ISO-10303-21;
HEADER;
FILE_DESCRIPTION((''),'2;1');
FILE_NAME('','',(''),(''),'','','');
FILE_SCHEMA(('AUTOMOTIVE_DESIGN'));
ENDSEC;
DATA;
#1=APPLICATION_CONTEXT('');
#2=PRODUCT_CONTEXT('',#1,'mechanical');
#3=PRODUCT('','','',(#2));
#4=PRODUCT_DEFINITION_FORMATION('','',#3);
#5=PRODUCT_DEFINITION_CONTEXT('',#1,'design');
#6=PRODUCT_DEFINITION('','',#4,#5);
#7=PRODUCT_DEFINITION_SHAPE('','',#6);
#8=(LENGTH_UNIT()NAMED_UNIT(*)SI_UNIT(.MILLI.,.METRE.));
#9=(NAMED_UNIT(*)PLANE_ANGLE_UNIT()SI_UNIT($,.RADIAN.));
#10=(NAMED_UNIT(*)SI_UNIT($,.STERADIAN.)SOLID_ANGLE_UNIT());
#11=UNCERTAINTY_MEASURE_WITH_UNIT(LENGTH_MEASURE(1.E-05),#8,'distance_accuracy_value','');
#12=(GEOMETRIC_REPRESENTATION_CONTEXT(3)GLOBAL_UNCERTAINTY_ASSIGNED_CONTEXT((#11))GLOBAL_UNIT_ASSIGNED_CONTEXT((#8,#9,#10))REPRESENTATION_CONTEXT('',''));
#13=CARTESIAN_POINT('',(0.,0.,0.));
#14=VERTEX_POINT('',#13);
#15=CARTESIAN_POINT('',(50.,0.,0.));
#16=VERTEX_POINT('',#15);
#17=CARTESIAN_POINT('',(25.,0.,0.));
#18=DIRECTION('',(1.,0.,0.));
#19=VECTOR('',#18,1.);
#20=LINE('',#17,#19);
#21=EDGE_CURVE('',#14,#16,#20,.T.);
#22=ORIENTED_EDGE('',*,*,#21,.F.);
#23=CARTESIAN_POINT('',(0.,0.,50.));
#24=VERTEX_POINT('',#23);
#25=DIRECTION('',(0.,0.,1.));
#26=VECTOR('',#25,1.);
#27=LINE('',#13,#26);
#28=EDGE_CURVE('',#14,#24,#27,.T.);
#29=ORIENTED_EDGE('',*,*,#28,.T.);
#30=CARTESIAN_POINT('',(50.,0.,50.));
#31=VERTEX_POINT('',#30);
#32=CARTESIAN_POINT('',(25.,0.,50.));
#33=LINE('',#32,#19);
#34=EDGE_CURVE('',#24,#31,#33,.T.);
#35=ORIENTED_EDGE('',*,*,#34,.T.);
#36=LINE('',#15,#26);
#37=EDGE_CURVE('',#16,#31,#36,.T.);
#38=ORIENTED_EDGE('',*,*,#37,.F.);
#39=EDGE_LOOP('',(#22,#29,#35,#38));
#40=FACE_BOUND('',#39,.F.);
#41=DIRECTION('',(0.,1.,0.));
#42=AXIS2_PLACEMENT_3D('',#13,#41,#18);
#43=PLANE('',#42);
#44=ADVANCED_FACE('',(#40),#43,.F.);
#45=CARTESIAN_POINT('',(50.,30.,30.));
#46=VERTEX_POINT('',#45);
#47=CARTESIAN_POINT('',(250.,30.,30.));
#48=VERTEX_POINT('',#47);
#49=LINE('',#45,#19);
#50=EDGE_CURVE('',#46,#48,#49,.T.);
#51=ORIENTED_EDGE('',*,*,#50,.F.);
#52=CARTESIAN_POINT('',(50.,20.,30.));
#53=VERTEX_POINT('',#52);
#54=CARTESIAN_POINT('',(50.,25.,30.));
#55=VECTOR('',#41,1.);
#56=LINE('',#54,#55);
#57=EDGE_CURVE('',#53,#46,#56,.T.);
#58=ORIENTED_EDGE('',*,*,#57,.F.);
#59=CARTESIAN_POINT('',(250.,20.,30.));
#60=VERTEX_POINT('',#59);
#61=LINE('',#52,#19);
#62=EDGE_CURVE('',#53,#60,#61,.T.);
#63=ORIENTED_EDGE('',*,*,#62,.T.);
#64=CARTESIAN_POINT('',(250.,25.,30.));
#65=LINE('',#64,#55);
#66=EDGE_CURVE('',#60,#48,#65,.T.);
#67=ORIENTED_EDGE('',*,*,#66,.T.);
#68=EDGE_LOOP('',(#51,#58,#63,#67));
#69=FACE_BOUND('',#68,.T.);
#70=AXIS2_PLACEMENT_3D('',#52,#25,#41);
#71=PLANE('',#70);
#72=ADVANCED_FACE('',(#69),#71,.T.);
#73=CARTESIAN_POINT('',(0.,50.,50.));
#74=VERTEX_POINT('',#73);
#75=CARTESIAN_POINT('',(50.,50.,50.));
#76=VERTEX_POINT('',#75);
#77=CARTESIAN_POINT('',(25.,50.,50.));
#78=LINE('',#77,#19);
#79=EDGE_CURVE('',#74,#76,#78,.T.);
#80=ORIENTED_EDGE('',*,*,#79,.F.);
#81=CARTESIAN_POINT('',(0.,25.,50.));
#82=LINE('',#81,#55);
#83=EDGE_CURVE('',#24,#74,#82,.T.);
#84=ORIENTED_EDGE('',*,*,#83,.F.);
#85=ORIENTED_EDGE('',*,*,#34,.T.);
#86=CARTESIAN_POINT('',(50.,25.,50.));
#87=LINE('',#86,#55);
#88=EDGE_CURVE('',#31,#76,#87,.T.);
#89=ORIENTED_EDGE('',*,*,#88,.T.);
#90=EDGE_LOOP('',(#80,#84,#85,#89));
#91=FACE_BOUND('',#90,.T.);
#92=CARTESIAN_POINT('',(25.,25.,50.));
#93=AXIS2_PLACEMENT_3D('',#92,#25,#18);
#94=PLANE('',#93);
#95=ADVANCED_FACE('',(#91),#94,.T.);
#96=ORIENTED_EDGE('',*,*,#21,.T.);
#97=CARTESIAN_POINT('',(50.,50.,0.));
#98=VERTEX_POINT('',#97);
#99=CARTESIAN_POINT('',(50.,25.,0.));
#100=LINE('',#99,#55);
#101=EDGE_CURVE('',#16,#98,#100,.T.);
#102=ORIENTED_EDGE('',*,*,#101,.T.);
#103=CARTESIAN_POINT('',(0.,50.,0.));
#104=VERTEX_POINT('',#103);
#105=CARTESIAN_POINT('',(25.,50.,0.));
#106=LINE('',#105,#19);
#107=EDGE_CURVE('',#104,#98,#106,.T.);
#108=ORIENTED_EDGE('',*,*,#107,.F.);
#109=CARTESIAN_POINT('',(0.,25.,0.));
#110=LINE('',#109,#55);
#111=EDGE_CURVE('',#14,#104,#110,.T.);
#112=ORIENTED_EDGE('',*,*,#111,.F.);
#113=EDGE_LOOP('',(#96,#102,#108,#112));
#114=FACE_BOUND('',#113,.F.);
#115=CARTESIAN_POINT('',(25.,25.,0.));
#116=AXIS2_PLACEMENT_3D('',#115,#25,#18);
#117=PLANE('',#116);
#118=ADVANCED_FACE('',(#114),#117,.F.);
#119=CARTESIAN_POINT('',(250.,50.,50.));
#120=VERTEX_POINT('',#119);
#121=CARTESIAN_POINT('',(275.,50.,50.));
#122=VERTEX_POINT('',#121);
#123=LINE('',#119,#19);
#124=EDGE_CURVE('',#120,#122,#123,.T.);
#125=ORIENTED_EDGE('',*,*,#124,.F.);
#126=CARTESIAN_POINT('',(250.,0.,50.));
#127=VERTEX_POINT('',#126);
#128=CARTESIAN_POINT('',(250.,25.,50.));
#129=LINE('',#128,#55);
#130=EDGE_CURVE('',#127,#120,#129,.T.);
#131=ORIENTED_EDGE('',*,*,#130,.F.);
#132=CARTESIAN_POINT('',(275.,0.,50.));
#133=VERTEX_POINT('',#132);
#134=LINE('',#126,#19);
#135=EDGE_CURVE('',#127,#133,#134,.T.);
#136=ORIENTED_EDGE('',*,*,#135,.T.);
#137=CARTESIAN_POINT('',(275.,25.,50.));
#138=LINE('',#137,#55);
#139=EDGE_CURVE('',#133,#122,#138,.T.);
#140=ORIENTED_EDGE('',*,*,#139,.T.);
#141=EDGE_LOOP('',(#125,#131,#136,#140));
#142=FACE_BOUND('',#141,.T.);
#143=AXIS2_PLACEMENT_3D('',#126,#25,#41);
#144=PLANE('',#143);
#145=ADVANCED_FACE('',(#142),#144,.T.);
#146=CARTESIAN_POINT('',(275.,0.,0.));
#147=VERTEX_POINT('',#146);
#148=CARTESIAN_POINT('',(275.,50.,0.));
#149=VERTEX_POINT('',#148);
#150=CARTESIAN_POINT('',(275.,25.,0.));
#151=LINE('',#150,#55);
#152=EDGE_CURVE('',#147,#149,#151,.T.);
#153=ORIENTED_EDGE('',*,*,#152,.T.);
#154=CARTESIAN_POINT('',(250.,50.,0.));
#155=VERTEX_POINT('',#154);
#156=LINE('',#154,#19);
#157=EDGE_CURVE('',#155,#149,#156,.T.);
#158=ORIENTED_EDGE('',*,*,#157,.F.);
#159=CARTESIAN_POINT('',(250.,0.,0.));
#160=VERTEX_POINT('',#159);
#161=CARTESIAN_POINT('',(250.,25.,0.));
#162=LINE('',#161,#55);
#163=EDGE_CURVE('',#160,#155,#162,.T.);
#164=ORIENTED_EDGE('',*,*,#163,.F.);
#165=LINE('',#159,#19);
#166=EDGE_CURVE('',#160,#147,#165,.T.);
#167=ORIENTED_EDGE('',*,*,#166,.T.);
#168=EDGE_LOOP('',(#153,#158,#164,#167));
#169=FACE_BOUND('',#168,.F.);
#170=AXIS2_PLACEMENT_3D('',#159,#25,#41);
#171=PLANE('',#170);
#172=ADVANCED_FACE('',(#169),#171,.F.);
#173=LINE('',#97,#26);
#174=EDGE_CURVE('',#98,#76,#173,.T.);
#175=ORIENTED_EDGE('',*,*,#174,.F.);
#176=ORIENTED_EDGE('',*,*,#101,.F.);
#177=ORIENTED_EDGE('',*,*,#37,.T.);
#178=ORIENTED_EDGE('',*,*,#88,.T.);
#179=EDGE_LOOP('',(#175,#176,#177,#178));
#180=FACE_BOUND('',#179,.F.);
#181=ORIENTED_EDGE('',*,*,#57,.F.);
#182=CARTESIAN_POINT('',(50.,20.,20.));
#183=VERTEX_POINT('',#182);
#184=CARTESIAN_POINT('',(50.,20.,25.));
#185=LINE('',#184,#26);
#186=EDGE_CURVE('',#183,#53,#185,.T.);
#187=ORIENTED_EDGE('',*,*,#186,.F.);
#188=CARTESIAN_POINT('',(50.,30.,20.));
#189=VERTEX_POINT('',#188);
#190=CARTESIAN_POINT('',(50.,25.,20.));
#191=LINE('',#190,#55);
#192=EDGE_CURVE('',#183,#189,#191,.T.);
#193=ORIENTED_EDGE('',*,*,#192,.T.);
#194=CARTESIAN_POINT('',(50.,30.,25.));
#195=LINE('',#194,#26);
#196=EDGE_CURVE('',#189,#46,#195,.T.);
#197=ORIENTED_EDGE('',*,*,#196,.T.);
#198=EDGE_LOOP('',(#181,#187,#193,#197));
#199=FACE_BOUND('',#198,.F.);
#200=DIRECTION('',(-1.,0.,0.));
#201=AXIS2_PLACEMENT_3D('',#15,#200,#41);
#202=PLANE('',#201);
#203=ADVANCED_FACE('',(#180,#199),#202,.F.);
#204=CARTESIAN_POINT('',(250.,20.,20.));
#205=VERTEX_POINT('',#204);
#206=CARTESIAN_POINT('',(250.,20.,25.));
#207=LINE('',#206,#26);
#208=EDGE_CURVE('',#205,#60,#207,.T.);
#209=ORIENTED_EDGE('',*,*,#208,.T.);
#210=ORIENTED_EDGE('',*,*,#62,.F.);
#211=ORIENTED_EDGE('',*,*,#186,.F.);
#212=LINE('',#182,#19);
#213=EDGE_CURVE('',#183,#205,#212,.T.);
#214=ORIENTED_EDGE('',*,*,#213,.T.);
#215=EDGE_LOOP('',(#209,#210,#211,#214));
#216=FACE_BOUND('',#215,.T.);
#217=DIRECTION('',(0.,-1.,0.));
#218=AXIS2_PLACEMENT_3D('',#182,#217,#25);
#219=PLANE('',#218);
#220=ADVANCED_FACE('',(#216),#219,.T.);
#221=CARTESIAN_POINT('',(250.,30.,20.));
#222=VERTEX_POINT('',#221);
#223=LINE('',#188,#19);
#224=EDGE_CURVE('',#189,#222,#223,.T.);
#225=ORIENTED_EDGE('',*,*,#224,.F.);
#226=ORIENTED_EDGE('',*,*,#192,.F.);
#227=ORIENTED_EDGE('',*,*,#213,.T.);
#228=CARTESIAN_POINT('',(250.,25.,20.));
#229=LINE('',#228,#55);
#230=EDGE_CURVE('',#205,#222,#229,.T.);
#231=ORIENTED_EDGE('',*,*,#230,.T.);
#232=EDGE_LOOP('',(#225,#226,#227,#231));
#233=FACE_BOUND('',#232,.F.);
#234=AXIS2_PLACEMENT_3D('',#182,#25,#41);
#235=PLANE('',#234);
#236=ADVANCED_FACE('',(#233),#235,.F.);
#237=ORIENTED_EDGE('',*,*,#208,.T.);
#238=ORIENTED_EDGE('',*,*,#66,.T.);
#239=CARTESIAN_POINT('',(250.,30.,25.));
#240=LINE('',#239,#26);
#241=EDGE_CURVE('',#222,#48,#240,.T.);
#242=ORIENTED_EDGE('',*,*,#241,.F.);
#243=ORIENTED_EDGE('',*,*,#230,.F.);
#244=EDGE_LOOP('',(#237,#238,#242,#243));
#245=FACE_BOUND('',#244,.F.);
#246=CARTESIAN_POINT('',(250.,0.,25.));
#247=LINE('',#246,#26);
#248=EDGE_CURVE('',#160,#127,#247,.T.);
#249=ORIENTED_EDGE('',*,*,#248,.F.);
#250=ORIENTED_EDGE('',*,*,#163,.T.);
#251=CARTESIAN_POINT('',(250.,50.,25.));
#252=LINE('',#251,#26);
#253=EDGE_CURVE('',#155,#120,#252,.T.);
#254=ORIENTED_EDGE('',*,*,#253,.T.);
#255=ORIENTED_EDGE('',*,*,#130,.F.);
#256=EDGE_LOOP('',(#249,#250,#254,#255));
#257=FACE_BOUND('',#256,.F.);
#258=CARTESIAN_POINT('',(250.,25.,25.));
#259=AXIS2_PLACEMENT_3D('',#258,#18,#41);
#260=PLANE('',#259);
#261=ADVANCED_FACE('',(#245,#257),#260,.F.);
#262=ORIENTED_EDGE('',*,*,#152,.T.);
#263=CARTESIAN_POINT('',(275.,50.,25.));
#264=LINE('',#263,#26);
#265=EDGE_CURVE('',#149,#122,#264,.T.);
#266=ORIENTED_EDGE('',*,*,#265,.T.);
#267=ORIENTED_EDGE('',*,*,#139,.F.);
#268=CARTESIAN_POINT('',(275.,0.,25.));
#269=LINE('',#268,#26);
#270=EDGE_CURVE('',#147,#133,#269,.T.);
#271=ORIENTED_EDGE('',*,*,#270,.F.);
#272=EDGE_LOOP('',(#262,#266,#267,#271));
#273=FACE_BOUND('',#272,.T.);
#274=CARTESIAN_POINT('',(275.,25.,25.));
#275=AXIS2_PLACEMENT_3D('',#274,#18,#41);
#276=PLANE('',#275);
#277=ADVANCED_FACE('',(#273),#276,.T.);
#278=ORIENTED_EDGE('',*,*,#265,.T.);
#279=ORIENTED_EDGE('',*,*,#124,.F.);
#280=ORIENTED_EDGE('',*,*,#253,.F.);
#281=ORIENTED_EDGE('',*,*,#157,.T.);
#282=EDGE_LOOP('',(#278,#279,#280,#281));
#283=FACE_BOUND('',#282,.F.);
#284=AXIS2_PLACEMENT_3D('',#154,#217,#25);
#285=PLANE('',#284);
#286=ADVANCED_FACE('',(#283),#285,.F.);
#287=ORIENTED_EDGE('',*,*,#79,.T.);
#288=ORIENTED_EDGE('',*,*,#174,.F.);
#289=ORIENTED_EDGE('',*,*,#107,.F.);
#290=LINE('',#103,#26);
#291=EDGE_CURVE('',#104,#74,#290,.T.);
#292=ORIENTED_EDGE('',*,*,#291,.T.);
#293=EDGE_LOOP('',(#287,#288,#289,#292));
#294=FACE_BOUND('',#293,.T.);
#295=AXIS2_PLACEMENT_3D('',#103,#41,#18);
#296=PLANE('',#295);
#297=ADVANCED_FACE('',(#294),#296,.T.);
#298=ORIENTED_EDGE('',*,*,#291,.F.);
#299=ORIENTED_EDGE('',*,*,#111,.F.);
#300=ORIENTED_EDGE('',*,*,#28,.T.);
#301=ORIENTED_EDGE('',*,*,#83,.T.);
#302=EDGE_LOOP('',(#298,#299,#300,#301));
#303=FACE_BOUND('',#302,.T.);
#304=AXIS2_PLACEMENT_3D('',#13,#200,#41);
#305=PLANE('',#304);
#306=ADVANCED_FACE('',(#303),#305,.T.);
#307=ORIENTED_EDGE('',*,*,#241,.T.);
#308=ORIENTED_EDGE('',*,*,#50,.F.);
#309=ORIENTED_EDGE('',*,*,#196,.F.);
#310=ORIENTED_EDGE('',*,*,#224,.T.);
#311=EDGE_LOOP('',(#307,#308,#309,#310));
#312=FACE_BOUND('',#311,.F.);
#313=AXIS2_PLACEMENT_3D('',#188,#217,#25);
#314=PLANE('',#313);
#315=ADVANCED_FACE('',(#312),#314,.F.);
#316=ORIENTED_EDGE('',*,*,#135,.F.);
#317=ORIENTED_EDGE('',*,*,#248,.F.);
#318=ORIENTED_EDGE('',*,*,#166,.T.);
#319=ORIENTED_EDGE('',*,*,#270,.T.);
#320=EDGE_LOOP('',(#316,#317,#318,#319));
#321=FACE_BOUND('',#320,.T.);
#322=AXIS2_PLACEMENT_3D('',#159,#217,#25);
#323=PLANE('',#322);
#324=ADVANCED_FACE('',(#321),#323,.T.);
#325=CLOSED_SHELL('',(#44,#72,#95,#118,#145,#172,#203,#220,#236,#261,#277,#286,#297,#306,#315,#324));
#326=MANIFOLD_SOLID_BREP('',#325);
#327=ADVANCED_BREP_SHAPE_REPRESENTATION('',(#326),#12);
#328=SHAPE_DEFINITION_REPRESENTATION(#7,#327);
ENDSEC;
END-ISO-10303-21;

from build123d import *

# Parameters (mm, degrees)
F0_W     = 50
F0_H     = 50
F1_DEPTH = 50
F2_W     = 10
F2_H     = 10
F3_DEPTH = 200
F4_W     = 50
F4_H     = 50
F5_DEPTH = 25


# Not quite as in the source:
# - a feature names something its author has since deleted; it is built from what else it names


with BuildPart() as f1:
    # F0 (on Top) → F1 (new body)
    with BuildSketch(Plane.XY):
        with Locations((25, 25)):
            Rectangle(F0_W, F0_H)
    extrude(amount=F1_DEPTH)

    # F2 (on face) → F3 (join)
    with BuildSketch(Plane.YZ.offset(50)):
        with Locations((25, 25)):
            Rectangle(F2_W, F2_H)
    extrude(amount=F3_DEPTH)

    # F4 (on face) → F5 (join)
    with BuildSketch(Plane.YZ.offset(250)):
        with Locations((25, 25)):
            Rectangle(F4_W, F4_H)
    extrude(amount=F5_DEPTH)


solid = f1.part
